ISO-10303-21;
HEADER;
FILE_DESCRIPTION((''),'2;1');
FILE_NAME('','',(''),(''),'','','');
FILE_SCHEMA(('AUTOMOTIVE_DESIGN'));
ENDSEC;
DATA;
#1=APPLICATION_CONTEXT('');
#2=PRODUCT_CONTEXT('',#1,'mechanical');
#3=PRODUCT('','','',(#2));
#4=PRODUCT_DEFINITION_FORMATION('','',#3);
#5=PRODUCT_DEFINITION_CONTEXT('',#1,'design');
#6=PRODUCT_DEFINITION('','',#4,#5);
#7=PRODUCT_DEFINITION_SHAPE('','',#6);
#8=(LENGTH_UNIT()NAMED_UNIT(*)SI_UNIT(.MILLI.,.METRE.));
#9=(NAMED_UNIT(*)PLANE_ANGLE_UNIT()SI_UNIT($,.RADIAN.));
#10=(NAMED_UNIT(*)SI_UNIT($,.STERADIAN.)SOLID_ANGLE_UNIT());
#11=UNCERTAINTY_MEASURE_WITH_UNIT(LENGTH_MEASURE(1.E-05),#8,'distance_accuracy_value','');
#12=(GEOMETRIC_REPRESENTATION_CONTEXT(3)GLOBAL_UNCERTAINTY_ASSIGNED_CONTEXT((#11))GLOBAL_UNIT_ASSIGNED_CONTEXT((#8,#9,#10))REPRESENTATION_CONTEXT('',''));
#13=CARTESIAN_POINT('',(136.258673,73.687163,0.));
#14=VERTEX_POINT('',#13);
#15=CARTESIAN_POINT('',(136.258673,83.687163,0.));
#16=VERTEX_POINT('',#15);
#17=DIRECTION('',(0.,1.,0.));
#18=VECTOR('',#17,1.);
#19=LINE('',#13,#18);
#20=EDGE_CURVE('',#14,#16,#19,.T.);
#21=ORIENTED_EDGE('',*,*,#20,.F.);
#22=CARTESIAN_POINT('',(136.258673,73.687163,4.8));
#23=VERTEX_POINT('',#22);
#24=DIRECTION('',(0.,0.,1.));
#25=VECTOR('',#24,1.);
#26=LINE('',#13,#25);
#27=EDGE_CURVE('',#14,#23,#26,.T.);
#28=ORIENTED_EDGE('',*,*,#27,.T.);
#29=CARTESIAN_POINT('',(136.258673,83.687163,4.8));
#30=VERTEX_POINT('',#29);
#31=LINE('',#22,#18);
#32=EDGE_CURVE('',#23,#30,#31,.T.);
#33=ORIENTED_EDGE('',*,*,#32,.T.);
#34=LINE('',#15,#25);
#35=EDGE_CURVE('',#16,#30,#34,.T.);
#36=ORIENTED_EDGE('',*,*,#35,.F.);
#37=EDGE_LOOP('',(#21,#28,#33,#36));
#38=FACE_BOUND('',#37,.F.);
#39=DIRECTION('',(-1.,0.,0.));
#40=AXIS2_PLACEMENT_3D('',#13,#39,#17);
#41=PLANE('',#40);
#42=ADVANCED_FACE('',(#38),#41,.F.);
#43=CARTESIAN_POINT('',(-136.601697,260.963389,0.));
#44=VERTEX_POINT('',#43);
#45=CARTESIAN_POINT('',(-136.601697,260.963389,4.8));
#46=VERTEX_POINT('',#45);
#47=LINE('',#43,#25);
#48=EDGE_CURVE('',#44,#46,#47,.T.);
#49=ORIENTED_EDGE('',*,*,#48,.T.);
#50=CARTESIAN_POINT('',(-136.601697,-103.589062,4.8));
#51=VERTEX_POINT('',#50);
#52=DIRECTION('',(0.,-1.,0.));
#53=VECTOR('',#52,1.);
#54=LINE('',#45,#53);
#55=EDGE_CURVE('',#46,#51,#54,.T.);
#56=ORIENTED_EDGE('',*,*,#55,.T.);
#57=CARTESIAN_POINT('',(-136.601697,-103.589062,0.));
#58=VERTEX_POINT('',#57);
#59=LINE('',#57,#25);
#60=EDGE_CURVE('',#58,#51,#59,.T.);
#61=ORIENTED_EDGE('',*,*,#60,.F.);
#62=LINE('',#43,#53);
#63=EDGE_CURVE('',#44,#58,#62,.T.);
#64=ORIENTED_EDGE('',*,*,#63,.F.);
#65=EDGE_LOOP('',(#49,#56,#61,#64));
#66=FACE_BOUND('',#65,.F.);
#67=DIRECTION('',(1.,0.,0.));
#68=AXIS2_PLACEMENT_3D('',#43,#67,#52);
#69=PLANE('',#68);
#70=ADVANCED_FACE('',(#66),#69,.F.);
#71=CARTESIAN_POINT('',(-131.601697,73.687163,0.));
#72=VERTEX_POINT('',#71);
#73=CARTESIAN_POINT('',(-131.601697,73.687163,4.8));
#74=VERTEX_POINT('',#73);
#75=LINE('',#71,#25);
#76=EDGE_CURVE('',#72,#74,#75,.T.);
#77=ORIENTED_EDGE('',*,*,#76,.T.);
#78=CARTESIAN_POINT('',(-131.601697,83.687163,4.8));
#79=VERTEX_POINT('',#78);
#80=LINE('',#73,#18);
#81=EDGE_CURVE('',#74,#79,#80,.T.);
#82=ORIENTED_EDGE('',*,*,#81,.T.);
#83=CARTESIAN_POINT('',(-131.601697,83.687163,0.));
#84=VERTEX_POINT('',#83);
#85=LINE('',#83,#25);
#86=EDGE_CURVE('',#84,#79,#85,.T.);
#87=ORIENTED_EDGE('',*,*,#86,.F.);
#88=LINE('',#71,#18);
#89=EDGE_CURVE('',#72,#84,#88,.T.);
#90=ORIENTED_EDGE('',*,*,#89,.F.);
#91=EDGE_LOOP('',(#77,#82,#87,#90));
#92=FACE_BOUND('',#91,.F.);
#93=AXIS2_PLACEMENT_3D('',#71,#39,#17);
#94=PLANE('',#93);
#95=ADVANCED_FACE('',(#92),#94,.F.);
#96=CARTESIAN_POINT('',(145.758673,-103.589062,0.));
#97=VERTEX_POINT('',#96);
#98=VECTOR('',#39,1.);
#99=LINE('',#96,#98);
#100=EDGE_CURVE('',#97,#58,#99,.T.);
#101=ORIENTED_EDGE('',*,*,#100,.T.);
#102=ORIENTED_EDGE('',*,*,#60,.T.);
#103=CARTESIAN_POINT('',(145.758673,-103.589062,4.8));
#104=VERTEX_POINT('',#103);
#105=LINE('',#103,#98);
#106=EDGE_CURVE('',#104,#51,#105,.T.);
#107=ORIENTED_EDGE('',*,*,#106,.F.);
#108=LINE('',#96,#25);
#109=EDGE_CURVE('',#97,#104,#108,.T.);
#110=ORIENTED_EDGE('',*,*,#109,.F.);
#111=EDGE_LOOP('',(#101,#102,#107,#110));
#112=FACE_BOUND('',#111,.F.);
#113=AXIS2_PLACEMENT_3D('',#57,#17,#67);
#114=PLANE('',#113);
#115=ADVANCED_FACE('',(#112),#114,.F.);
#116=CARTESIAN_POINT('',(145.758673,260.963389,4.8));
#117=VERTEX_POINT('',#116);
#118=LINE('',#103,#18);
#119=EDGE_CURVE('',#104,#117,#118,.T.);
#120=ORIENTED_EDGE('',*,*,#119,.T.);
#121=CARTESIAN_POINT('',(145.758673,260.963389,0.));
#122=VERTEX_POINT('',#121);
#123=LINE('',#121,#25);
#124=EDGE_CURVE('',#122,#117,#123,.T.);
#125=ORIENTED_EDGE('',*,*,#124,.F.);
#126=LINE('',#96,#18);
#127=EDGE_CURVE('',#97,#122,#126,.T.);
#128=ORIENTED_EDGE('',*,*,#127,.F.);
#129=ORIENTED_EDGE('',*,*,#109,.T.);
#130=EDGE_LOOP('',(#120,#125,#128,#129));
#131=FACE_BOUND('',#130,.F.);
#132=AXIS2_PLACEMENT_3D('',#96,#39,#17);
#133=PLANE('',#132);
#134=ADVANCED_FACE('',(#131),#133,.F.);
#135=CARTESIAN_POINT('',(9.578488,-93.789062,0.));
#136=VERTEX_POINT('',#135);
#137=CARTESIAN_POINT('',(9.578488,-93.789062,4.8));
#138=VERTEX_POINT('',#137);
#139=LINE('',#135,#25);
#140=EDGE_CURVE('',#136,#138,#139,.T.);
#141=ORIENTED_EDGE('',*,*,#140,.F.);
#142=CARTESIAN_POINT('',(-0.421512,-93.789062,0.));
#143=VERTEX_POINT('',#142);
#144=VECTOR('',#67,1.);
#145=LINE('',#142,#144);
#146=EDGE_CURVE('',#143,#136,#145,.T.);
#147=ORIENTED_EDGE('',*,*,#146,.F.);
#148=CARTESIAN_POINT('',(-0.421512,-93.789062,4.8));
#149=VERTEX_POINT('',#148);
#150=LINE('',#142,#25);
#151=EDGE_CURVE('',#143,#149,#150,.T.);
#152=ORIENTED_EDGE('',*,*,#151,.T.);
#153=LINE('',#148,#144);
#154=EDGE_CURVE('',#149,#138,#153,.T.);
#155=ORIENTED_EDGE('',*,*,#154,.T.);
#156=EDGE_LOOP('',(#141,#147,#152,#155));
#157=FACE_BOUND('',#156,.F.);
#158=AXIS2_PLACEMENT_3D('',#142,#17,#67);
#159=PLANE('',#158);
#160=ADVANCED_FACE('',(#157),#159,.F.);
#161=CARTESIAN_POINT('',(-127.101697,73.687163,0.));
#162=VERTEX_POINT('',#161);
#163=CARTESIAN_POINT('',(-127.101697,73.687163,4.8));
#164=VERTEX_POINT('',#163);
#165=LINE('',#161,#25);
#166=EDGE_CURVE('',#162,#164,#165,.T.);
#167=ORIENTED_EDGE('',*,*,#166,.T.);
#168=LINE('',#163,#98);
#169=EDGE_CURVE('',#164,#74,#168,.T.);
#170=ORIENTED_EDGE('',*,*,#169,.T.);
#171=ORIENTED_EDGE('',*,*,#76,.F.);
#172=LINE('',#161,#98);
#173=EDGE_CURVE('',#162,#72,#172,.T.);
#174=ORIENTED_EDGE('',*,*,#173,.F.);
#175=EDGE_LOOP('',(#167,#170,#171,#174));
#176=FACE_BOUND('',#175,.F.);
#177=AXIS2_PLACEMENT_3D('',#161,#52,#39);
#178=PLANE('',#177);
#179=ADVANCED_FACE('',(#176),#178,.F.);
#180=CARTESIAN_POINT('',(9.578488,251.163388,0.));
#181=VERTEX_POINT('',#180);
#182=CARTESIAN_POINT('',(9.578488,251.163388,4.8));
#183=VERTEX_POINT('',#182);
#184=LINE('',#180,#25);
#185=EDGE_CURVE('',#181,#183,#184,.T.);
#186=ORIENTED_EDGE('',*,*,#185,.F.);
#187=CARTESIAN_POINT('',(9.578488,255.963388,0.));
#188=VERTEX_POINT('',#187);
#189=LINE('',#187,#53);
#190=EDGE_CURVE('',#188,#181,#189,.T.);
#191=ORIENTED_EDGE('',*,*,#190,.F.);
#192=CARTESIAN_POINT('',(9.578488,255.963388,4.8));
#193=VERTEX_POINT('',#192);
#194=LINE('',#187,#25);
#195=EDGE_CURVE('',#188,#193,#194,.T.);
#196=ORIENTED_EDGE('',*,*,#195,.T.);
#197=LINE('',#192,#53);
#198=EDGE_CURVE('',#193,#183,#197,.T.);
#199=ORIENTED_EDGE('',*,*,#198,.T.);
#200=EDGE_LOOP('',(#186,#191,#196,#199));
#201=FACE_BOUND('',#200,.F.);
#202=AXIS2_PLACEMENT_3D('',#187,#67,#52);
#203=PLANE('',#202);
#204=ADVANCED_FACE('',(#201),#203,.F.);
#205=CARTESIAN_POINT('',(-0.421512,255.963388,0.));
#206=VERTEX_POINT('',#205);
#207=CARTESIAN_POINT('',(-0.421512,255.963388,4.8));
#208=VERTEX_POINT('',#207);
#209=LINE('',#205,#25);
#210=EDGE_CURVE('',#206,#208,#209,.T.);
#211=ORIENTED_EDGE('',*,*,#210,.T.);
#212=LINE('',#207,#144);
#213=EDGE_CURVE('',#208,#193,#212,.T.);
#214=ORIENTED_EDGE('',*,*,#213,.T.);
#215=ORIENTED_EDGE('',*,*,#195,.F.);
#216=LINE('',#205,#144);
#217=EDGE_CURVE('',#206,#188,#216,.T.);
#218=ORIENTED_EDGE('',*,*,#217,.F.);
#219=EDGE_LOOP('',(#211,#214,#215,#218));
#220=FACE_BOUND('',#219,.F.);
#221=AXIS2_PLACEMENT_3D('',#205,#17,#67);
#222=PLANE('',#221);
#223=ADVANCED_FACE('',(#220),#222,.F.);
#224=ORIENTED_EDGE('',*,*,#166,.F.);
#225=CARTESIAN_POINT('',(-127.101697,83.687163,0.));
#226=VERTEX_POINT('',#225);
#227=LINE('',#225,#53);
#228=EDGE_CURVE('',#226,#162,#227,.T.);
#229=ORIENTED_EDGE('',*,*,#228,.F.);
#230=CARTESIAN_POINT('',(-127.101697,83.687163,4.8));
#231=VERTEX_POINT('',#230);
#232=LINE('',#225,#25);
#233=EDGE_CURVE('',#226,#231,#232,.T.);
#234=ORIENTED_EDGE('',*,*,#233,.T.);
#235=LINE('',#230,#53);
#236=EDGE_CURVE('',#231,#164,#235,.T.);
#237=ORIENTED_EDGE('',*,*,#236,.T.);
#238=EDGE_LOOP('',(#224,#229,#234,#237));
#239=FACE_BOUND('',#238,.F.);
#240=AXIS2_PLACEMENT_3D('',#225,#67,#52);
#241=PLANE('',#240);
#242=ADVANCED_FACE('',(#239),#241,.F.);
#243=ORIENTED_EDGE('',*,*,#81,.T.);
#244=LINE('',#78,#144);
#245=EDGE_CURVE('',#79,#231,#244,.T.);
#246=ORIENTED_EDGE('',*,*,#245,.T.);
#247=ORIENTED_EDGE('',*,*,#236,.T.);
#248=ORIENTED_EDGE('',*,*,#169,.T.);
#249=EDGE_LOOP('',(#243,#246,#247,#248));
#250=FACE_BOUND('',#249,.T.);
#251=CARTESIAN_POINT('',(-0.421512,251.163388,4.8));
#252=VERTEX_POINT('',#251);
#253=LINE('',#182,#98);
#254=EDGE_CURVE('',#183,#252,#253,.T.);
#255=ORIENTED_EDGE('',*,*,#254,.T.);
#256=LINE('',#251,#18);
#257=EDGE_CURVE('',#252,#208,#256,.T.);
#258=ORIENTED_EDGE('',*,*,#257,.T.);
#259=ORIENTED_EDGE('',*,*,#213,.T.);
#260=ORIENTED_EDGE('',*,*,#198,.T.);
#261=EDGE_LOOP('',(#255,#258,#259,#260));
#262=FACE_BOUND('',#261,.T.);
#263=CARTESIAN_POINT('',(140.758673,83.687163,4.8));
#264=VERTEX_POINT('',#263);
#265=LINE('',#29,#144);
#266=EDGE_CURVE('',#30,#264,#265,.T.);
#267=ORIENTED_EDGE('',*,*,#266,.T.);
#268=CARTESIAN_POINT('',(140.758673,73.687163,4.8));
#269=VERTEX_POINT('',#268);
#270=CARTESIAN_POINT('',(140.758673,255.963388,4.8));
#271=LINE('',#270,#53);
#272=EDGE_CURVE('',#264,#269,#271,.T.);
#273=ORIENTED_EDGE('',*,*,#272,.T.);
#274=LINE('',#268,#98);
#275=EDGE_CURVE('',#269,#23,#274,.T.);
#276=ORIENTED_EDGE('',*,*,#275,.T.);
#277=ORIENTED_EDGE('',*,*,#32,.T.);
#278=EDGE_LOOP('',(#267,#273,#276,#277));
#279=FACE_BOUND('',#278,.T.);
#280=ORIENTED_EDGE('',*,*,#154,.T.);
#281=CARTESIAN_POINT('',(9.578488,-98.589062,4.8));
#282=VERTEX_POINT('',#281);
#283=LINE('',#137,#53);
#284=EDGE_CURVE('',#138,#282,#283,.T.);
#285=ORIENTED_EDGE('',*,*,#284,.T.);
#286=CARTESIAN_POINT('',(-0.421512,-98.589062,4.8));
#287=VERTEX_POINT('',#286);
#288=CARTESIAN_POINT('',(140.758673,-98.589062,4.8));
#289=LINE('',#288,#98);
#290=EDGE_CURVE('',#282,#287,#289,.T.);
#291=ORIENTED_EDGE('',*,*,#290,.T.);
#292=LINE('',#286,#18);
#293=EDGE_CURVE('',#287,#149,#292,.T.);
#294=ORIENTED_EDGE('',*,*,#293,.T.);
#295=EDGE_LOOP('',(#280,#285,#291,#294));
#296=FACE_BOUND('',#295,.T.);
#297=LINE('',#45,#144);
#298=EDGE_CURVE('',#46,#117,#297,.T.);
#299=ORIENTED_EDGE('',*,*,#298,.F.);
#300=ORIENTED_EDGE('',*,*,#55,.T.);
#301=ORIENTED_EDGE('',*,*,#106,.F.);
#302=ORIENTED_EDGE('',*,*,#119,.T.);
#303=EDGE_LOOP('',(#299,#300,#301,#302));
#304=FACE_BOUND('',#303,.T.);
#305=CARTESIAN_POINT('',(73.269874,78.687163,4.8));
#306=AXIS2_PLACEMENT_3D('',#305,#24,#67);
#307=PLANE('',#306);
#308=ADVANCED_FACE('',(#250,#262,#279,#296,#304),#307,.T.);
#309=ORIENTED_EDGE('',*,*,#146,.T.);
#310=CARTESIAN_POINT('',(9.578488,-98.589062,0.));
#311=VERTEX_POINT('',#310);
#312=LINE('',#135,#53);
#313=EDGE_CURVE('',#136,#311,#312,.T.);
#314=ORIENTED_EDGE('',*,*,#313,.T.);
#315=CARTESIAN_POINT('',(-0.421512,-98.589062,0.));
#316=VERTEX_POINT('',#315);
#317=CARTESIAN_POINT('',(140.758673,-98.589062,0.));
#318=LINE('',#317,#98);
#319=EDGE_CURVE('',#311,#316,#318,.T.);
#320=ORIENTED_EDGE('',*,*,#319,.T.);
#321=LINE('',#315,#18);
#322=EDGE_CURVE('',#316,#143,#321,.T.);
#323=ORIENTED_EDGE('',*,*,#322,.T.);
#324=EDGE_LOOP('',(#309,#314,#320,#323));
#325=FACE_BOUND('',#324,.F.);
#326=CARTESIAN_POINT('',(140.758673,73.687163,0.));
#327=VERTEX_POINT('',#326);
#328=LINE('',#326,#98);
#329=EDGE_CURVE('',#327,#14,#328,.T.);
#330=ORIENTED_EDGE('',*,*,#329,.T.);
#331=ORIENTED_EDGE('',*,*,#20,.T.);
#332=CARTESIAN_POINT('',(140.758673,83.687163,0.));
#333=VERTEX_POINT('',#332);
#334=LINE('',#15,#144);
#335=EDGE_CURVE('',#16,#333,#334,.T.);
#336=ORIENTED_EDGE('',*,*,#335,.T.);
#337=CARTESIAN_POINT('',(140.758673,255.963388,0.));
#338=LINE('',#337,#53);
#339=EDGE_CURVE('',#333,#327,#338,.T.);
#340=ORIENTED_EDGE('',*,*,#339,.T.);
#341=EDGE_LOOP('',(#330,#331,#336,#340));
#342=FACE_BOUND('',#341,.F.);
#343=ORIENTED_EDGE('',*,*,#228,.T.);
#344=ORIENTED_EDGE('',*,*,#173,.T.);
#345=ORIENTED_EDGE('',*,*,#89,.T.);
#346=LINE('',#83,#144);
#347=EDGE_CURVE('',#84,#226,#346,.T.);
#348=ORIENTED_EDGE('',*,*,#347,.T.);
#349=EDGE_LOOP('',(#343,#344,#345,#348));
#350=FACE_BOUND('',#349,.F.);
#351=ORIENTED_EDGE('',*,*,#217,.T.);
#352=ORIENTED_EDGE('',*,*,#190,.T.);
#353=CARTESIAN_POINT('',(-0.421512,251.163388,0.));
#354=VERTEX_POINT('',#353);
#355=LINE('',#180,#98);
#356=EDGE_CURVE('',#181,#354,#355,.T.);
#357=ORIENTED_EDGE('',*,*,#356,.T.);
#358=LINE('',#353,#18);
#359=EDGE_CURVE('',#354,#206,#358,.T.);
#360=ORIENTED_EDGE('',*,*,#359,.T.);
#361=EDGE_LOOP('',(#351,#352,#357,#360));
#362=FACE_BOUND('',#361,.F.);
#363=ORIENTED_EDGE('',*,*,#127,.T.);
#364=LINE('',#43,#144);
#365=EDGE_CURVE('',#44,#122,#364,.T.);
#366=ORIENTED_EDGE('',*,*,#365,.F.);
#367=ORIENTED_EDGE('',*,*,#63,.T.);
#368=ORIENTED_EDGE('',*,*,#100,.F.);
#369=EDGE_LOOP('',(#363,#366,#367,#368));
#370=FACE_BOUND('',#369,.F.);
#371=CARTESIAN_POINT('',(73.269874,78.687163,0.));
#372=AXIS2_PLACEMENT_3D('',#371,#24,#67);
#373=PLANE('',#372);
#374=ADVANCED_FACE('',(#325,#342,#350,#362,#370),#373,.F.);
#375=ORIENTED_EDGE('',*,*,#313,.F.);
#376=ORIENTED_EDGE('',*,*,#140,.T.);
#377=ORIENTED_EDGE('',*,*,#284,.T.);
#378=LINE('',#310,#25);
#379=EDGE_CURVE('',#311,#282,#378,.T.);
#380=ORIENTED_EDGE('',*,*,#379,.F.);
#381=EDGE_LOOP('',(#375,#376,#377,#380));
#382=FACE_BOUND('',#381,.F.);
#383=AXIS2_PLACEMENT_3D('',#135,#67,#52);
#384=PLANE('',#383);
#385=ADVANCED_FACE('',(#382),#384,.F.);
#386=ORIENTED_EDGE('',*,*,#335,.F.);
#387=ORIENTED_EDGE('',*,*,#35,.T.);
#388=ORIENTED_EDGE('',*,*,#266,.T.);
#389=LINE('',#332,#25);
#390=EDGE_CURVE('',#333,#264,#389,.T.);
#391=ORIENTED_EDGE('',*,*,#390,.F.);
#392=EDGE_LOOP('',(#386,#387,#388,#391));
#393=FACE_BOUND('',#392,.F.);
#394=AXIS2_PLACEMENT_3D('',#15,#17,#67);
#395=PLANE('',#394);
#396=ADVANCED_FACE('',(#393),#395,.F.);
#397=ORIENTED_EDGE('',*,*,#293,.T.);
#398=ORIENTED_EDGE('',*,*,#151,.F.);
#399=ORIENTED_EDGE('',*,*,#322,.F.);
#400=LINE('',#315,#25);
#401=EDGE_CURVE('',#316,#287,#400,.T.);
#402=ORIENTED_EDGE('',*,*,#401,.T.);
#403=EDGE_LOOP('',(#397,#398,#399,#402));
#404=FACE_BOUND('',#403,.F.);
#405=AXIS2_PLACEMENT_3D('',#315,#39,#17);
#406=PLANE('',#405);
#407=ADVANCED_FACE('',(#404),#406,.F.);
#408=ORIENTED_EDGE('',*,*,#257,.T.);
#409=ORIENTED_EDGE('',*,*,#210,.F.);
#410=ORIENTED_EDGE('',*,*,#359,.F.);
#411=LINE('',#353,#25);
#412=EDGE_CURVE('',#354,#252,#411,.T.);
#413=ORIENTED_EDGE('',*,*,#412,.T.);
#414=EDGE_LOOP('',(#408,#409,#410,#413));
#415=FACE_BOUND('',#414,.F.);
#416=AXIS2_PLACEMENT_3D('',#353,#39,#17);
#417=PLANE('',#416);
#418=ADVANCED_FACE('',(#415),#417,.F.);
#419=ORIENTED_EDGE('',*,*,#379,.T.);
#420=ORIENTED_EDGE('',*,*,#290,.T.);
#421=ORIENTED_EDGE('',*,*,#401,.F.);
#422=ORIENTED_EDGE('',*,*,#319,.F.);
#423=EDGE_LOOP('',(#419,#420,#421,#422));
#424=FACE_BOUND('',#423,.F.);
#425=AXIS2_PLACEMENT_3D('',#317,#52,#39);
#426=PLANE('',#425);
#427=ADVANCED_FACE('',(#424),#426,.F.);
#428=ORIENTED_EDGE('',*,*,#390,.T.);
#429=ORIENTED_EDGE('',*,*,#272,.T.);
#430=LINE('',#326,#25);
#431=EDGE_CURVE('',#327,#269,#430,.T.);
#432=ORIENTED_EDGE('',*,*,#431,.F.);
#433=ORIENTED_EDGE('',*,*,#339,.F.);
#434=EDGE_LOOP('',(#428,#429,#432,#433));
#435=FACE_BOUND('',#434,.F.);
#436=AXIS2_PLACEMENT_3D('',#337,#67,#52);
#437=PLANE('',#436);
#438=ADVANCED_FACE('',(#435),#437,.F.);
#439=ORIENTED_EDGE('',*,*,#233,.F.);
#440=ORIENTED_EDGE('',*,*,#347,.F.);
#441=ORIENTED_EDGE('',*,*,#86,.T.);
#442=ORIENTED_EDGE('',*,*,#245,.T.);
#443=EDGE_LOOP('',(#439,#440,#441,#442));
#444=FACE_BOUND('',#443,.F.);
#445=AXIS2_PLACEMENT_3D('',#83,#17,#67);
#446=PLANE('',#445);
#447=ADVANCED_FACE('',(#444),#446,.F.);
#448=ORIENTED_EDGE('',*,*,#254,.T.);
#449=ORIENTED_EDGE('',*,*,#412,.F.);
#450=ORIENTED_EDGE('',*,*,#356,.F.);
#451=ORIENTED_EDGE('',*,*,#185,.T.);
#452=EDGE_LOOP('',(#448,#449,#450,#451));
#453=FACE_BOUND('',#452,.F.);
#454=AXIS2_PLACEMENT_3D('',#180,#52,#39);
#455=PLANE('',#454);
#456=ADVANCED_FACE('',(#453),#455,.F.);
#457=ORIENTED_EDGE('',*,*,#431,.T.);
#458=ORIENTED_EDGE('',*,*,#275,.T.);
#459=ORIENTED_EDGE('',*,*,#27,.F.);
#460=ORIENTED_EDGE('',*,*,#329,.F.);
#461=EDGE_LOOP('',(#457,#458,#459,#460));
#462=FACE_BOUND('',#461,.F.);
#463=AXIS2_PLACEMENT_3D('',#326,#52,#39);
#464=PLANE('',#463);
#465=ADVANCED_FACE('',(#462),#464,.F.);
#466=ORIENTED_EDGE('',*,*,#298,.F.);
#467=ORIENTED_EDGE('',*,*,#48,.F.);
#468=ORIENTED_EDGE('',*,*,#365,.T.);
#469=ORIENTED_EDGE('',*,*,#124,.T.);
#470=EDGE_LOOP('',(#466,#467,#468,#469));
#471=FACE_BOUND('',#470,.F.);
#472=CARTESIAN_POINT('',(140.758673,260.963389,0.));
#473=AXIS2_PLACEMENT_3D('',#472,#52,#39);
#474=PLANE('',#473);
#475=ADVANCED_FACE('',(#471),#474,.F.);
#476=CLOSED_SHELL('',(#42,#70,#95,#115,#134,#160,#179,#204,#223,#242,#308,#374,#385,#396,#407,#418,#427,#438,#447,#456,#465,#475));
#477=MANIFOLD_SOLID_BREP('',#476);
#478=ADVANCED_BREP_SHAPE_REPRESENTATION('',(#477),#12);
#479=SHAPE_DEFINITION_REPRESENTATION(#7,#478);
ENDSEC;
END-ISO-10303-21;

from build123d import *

# Parameters (mm, degrees)
F1_DEPTH = 4.8
F2_DEPTH = 4.8


# Not quite as in the source:
# - a feature names something its author has since deleted; it is built from what else it names


with BuildPart() as f1:
    # F0 (on Top) → F1 (new body)
    with BuildSketch(Plane.XY):
        Polygon((140.7586729476, 255.9633882557), (9.5784879476, 255.9633882557), (9.5784879476, 251.1633882557), (4.5784879476, 251.1633882557), (4.5784879476, 78.6871632557), (4.5784879476, -93.7890617443), (9.5784879476, -93.7890617443), (9.5784879476, -98.5890617443), (140.7586729476, -98.5890617443), (140.7586729476, 73.6871632557), (136.2586729476, 73.6871632557), (136.2586729476, 78.6871632557), (136.2586729476, 83.6871632557), (140.7586729476, 83.6871632557), align=None)
        Polygon((-0.4215120524, 255.9633882557), (-131.6016970524, 255.9633882557), (-131.6016970524, 83.6871632557), (-127.1016970524, 83.6871632557), (-127.1016970524, 78.6871632557), (-127.1016970524, 73.6871632557), (-131.6016970524, 73.6871632557), (-131.6016970524, -98.5890617443), (-0.4215120524, -98.5890617443), (-0.4215120524, -93.7890617443), (4.5784879476, -93.7890617443), (4.5784879476, 78.6871632557), (4.5784879476, 251.1633882557), (-0.4215120524, 251.1633882557), align=None)
        Polygon((-131.6016970524, 83.6871632557), (-131.6016970524, 255.9633882557), (-0.4215120524, 255.9633882557), (9.5784879476, 255.9633882557), (140.7586729476, 255.9633882557), (140.7586729476, 260.9633888568), (-136.6016970524, 260.9633888568), (-136.6016970524, -103.5890617443), (-131.6016970524, -103.5890617443), (-131.6016970524, -98.5890617443), (-131.6016970524, 73.6871632557), (-131.6016970524, 78.6871632557), align=None)
    extrude(amount=F1_DEPTH)

    # F0 (on Top) → F2 (join)
    with BuildSketch(Plane.XY):
        Polygon((-131.6016970524, 83.6871632557), (-131.6016970524, 255.9633882557), (-0.4215120524, 255.9633882557), (9.5784879476, 255.9633882557), (140.7586729476, 255.9633882557), (140.7586729476, 260.9633888568), (-136.6016970524, 260.9633888568), (-136.6016970524, -103.5890617443), (-131.6016970524, -103.5890617443), (-131.6016970524, -98.5890617443), (-131.6016970524, 73.6871632557), (-131.6016970524, 78.6871632557), align=None)
        Polygon((140.7586729476, 260.9633888568), (140.7586729476, 255.9633882557), (140.7586729476, 83.6871632557), (140.7586729476, 78.6871632557), (140.7586729476, 73.6871632557), (140.7586729476, -98.5890617443), (9.5784879476, -98.5890617443), (-0.4215120524, -98.5890617443), (-131.6016970524, -98.5890617443), (-131.6016970524, -103.5890617443), (145.7586729476, -103.5890617443), (145.7586729476, 260.9633888568), align=None)
    extrude(amount=F2_DEPTH)


solid = f1.part
